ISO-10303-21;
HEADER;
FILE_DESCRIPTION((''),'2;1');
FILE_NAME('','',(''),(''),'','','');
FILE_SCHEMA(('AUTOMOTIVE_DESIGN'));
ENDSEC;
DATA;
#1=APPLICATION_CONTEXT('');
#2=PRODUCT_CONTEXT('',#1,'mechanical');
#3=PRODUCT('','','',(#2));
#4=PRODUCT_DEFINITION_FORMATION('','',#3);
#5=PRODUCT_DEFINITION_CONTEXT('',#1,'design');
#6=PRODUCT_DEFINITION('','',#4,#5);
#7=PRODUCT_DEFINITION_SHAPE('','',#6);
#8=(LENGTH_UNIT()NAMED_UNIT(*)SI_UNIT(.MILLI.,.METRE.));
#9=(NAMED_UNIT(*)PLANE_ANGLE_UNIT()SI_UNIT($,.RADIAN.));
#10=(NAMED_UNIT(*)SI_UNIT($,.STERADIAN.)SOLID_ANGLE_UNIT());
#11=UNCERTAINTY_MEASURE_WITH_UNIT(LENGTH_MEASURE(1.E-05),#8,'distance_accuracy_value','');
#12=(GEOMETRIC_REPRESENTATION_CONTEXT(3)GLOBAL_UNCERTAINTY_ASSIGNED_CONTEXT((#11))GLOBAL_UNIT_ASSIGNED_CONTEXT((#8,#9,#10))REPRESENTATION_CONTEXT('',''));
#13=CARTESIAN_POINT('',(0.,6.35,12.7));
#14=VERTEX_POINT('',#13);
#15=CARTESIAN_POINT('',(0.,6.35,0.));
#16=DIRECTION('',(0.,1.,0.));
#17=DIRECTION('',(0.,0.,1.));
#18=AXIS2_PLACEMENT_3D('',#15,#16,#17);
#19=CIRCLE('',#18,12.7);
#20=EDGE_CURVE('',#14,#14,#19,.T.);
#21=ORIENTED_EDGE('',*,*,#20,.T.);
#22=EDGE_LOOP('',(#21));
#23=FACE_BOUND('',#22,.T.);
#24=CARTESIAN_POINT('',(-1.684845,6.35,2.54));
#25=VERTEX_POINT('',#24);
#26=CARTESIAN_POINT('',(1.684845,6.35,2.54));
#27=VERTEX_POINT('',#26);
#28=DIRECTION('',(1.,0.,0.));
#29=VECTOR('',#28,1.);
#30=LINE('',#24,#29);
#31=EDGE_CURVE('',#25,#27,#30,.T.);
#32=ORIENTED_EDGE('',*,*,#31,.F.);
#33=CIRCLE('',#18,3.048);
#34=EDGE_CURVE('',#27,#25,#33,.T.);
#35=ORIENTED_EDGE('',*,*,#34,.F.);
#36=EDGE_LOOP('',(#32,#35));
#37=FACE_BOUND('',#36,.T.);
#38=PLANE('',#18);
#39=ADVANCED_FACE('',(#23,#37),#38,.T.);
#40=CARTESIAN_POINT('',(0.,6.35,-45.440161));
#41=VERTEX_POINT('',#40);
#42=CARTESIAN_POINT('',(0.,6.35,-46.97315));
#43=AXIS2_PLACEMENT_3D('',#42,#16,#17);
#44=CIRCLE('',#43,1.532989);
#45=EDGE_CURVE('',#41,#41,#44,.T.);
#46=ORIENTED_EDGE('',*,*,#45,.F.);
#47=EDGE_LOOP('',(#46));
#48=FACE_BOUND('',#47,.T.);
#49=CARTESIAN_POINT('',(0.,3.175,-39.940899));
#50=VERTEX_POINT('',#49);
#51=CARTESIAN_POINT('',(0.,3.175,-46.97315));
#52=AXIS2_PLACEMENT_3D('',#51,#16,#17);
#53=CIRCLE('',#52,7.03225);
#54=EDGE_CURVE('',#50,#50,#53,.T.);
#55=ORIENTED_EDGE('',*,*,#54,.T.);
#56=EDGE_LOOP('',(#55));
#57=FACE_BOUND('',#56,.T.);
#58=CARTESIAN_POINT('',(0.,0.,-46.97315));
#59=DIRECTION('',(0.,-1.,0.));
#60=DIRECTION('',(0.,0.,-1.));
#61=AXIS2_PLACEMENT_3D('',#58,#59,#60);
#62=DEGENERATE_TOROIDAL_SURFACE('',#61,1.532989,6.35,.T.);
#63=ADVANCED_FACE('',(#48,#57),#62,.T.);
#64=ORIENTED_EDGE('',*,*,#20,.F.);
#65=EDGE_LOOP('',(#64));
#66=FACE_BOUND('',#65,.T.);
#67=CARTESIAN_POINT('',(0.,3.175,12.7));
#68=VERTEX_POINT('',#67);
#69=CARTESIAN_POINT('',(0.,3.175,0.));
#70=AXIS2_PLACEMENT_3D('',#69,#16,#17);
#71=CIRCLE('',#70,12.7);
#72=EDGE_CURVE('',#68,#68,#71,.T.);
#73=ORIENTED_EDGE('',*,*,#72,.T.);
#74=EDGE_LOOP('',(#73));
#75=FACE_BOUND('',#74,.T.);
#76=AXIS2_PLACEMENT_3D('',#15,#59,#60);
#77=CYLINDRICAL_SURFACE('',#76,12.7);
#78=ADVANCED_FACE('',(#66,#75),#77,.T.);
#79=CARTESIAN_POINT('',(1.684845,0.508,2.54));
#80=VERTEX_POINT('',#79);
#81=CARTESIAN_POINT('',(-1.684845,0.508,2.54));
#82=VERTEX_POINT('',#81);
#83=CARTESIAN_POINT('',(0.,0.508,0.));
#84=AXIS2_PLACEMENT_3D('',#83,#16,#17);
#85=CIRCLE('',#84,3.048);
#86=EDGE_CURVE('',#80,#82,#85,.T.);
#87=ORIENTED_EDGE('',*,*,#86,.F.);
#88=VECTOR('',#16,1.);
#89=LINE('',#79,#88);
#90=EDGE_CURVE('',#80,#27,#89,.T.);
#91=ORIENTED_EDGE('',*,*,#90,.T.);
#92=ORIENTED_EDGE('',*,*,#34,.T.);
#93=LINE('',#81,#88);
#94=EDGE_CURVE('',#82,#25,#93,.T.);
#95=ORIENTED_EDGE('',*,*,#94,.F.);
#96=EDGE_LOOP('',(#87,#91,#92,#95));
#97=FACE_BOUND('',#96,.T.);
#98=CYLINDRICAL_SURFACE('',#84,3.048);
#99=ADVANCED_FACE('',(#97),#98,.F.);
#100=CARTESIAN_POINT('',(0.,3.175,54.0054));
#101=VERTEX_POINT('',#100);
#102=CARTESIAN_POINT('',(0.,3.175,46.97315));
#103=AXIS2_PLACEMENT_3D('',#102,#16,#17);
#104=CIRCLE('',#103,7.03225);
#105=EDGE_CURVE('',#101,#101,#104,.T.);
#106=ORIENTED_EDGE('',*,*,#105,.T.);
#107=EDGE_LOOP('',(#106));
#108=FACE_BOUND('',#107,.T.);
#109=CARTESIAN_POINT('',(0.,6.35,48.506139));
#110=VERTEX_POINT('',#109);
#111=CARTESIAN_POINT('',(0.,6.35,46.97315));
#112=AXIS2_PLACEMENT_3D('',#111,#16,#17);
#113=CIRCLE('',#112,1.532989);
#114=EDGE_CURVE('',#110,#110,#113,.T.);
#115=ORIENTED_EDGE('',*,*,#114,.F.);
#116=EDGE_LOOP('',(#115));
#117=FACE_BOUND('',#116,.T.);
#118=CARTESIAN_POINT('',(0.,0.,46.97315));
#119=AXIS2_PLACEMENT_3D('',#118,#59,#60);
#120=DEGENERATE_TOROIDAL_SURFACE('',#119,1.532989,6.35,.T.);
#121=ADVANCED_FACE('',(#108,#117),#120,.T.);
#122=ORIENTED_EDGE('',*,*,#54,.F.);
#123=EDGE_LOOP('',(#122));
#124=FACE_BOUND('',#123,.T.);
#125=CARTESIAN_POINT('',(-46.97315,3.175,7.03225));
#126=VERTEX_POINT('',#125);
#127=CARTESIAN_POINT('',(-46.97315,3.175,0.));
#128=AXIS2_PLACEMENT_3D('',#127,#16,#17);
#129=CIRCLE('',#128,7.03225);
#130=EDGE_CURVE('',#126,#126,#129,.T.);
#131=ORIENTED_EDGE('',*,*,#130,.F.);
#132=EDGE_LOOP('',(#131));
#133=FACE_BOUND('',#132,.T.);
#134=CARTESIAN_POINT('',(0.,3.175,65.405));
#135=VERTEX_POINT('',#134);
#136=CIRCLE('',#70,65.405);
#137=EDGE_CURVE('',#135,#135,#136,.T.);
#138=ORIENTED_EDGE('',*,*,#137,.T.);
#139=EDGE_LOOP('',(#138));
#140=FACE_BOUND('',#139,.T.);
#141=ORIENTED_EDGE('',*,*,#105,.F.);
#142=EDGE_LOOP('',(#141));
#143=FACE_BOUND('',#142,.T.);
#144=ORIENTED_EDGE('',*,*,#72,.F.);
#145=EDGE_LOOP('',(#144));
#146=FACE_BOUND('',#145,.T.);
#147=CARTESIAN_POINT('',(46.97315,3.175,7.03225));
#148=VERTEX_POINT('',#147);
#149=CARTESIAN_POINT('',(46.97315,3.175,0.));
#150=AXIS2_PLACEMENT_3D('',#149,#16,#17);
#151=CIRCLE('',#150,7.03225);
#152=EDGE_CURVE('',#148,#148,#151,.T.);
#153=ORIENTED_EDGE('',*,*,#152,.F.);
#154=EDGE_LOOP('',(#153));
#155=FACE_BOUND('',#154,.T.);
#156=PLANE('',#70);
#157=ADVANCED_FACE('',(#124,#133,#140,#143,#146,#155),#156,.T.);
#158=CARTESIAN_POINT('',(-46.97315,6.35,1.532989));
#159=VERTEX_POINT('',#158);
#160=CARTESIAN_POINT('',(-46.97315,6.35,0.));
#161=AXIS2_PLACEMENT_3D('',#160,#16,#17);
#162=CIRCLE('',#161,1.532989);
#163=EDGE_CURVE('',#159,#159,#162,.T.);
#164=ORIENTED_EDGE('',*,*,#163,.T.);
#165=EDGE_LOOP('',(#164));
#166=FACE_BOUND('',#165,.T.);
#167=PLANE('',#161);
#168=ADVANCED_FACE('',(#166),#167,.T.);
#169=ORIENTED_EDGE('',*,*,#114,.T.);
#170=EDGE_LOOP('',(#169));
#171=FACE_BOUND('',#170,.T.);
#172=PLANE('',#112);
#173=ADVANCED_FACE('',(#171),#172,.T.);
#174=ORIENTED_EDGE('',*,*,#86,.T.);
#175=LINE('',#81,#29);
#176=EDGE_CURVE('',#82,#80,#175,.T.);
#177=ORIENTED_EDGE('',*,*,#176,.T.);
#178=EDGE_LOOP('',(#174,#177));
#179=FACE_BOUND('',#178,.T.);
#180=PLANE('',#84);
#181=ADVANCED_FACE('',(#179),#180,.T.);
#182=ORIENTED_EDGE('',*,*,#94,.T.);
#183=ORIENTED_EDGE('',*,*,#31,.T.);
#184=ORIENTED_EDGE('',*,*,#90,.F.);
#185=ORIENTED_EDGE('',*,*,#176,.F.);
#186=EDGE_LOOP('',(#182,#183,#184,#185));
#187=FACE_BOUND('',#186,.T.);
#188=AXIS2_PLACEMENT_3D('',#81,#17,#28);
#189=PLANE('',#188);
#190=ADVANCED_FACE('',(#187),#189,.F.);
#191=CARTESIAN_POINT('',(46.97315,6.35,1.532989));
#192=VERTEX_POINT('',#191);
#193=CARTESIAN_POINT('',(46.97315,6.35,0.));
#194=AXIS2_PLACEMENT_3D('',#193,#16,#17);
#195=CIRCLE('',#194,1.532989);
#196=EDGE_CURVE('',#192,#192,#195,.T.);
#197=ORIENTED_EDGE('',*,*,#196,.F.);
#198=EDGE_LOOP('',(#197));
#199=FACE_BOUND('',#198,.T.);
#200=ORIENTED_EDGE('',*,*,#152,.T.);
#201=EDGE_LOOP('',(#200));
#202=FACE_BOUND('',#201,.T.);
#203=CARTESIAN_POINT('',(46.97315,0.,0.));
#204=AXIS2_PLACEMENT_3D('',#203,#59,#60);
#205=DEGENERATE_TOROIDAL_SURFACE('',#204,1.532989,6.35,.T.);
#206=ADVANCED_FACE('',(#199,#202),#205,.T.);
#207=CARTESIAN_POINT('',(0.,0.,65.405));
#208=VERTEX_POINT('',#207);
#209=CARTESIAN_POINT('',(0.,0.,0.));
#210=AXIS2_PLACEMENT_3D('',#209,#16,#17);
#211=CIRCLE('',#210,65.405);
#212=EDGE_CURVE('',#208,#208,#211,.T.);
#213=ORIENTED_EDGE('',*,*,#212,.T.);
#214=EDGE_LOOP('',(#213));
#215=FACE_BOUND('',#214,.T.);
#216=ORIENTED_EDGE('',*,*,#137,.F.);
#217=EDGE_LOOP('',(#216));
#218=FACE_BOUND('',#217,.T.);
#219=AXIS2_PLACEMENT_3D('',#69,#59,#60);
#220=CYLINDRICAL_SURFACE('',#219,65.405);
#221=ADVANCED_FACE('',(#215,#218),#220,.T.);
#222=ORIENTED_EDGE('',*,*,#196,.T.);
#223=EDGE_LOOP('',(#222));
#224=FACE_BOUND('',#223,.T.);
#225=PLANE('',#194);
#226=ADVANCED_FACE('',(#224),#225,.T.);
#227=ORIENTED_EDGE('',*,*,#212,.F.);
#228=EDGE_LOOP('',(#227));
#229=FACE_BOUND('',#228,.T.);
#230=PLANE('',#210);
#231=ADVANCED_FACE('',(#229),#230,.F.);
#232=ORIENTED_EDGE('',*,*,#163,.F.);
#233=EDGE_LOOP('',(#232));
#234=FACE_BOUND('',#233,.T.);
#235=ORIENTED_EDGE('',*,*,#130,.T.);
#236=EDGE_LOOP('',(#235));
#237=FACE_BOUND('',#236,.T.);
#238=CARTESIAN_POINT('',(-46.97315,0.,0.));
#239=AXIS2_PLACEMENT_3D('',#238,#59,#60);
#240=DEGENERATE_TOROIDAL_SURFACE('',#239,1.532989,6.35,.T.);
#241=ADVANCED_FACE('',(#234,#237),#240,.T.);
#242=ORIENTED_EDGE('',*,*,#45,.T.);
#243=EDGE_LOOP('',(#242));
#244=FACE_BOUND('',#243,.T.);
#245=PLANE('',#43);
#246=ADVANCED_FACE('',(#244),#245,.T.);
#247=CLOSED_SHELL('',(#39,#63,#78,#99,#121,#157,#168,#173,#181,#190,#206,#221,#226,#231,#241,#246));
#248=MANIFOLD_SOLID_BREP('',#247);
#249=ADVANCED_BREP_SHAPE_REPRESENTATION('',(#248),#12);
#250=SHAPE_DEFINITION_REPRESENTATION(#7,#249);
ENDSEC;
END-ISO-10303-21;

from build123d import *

# Parameters (mm, degrees)
SKETCH1_R           = 65.405
BOSS_EXTRUDE1_DEPTH = 3.175
SKETCH2_R           = 12.7
BOSS_EXTRUDE2_DEPTH = 3.175
CUT_EXTRUDE1_DEPTH  = 5.842
SKETCH4_R           = 7.032250482
BOSS_EXTRUDE3_DEPTH = 3.175
FILLET3_R           = 6.35


with BuildPart() as part:
    # Sketch1 → Boss-Extrude1 (new body)
    with BuildSketch(Plane(origin=(0, 0, 0), x_dir=(1, 0, 0), z_dir=(0, 1, 0))):
        with Locations(Location((0, 0, 0), (0, 0, 270))):
            Circle(SKETCH1_R)
    extrude(amount=BOSS_EXTRUDE1_DEPTH)

    # Sketch2 → Boss-Extrude2 (add)
    with BuildSketch(Plane(origin=(0, 3.175, 0), x_dir=(1, 0, 0), z_dir=(0, 1, 0))):
        with Locations(Location((0, 0, 0), (0, 0, 270))):
            Circle(SKETCH2_R)
    extrude(amount=BOSS_EXTRUDE2_DEPTH)

    # Sketch3 → Cut-Extrude1 (cut)
    with BuildSketch(Plane(origin=(0, 6.35, 0), x_dir=(1, 0, 0), z_dir=(0, 1, 0))):
        with BuildLine():
            Line((-1.684845394, -2.54), (1.684845394, -2.54))
            ThreePointArc((1.684845394, -2.54), (0, 3.048), (-1.684845394, -2.54))
        make_face()
    extrude(amount=-CUT_EXTRUDE1_DEPTH, mode=Mode.SUBTRACT)

    # Sketch4 → Boss-Extrude3 (add)
    with BuildSketch(Plane(origin=(0, 3.175, 0), x_dir=(1, 0, 0), z_dir=(0, 1, 0))):
        with Locations(Location((0, 46.973149897, 0), (0, 0, 270))):
            Circle(SKETCH4_R)
        with Locations(Location((46.973149897, 0, 0), (0, 0, 270))):
            Circle(SKETCH4_R)
        with Locations(Location((0, -46.973149897, 0), (0, 0, 270))):
            Circle(SKETCH4_R)
        with Locations(Location((-46.973149897, 0, 0), (0, 0, 270))):
            Circle(SKETCH4_R)
    extrude(amount=BOSS_EXTRUDE3_DEPTH)

    # Fillet3
    # the kernel refuses this fillet: 6.35 mm, written as the material it takes off along each edge
    with BuildSketch(Plane(origin=(0, 6.35, -46.973149897), x_dir=(0, 0, 1), z_dir=(-1, 0, 0))) as fillet3_piece_1:
        with BuildLine():
            CenterArc((1.532989168, -6.35), FILLET3_R, 30, 60)
            Line((1.532989168, 0), (1.532989168, 0.127))
            Line((1.532989168, 0.127), (7.032250482, 0.127))
            Line((7.032250482, 0.127), (7.159250482, 0))
            ThreePointArc((7.159250482, 0), (7.159250482, -1.5875), (7.142235708, -3.1115))
            Line((7.142235708, -3.1115), (7.032250482, -3.175))
        make_face()
    revolve(axis=Axis((0, 6.35, -46.973149897), (0, 1, 0)), mode=Mode.SUBTRACT)
    with BuildSketch(Plane(origin=(46.973149897, 6.35, 0), x_dir=(0, 0, 1), z_dir=(-1, 0, 0))) as fillet3_piece_2:
        with BuildLine():
            CenterArc((1.532989168, -6.35), FILLET3_R, 30, 60)
            Line((1.532989168, 0), (1.532989168, 0.127))
            Line((1.532989168, 0.127), (7.032250482, 0.127))
            Line((7.032250482, 0.127), (7.159250482, 0))
            ThreePointArc((7.159250482, 0), (7.159250482, -1.5875), (7.142235708, -3.1115))
            Line((7.142235708, -3.1115), (7.032250482, -3.175))
        make_face()
    revolve(axis=Axis((46.973149897, 6.35, 0), (0, 1, 0)), mode=Mode.SUBTRACT)
    with BuildSketch(Plane(origin=(0, 6.35, 46.973149897), x_dir=(0, 0, 1), z_dir=(-1, 0, 0))) as fillet3_piece_3:
        with BuildLine():
            CenterArc((1.532989168, -6.35), FILLET3_R, 30, 60)
            Line((1.532989168, 0), (1.532989168, 0.127))
            Line((1.532989168, 0.127), (7.032250482, 0.127))
            Line((7.032250482, 0.127), (7.159250482, 0))
            ThreePointArc((7.159250482, 0), (7.159250482, -1.5875), (7.142235708, -3.1115))
            Line((7.142235708, -3.1115), (7.032250482, -3.175))
        make_face()
    revolve(axis=Axis((0, 6.35, 46.973149897), (0, 1, 0)), mode=Mode.SUBTRACT)
    with BuildSketch(Plane(origin=(-46.973149897, 6.35, 0), x_dir=(0, 0, 1), z_dir=(-1, 0, 0))) as fillet3_piece_4:
        with BuildLine():
            CenterArc((1.532989168, -6.35), FILLET3_R, 30, 60)
            Line((1.532989168, 0), (1.532989168, 0.127))
            Line((1.532989168, 0.127), (7.032250482, 0.127))
            Line((7.032250482, 0.127), (7.159250482, 0))
            ThreePointArc((7.159250482, 0), (7.159250482, -1.5875), (7.142235708, -3.1115))
            Line((7.142235708, -3.1115), (7.032250482, -3.175))
        make_face()
    revolve(axis=Axis((-46.973149897, 6.35, 0), (0, 1, 0)), mode=Mode.SUBTRACT)


solid = part.part
